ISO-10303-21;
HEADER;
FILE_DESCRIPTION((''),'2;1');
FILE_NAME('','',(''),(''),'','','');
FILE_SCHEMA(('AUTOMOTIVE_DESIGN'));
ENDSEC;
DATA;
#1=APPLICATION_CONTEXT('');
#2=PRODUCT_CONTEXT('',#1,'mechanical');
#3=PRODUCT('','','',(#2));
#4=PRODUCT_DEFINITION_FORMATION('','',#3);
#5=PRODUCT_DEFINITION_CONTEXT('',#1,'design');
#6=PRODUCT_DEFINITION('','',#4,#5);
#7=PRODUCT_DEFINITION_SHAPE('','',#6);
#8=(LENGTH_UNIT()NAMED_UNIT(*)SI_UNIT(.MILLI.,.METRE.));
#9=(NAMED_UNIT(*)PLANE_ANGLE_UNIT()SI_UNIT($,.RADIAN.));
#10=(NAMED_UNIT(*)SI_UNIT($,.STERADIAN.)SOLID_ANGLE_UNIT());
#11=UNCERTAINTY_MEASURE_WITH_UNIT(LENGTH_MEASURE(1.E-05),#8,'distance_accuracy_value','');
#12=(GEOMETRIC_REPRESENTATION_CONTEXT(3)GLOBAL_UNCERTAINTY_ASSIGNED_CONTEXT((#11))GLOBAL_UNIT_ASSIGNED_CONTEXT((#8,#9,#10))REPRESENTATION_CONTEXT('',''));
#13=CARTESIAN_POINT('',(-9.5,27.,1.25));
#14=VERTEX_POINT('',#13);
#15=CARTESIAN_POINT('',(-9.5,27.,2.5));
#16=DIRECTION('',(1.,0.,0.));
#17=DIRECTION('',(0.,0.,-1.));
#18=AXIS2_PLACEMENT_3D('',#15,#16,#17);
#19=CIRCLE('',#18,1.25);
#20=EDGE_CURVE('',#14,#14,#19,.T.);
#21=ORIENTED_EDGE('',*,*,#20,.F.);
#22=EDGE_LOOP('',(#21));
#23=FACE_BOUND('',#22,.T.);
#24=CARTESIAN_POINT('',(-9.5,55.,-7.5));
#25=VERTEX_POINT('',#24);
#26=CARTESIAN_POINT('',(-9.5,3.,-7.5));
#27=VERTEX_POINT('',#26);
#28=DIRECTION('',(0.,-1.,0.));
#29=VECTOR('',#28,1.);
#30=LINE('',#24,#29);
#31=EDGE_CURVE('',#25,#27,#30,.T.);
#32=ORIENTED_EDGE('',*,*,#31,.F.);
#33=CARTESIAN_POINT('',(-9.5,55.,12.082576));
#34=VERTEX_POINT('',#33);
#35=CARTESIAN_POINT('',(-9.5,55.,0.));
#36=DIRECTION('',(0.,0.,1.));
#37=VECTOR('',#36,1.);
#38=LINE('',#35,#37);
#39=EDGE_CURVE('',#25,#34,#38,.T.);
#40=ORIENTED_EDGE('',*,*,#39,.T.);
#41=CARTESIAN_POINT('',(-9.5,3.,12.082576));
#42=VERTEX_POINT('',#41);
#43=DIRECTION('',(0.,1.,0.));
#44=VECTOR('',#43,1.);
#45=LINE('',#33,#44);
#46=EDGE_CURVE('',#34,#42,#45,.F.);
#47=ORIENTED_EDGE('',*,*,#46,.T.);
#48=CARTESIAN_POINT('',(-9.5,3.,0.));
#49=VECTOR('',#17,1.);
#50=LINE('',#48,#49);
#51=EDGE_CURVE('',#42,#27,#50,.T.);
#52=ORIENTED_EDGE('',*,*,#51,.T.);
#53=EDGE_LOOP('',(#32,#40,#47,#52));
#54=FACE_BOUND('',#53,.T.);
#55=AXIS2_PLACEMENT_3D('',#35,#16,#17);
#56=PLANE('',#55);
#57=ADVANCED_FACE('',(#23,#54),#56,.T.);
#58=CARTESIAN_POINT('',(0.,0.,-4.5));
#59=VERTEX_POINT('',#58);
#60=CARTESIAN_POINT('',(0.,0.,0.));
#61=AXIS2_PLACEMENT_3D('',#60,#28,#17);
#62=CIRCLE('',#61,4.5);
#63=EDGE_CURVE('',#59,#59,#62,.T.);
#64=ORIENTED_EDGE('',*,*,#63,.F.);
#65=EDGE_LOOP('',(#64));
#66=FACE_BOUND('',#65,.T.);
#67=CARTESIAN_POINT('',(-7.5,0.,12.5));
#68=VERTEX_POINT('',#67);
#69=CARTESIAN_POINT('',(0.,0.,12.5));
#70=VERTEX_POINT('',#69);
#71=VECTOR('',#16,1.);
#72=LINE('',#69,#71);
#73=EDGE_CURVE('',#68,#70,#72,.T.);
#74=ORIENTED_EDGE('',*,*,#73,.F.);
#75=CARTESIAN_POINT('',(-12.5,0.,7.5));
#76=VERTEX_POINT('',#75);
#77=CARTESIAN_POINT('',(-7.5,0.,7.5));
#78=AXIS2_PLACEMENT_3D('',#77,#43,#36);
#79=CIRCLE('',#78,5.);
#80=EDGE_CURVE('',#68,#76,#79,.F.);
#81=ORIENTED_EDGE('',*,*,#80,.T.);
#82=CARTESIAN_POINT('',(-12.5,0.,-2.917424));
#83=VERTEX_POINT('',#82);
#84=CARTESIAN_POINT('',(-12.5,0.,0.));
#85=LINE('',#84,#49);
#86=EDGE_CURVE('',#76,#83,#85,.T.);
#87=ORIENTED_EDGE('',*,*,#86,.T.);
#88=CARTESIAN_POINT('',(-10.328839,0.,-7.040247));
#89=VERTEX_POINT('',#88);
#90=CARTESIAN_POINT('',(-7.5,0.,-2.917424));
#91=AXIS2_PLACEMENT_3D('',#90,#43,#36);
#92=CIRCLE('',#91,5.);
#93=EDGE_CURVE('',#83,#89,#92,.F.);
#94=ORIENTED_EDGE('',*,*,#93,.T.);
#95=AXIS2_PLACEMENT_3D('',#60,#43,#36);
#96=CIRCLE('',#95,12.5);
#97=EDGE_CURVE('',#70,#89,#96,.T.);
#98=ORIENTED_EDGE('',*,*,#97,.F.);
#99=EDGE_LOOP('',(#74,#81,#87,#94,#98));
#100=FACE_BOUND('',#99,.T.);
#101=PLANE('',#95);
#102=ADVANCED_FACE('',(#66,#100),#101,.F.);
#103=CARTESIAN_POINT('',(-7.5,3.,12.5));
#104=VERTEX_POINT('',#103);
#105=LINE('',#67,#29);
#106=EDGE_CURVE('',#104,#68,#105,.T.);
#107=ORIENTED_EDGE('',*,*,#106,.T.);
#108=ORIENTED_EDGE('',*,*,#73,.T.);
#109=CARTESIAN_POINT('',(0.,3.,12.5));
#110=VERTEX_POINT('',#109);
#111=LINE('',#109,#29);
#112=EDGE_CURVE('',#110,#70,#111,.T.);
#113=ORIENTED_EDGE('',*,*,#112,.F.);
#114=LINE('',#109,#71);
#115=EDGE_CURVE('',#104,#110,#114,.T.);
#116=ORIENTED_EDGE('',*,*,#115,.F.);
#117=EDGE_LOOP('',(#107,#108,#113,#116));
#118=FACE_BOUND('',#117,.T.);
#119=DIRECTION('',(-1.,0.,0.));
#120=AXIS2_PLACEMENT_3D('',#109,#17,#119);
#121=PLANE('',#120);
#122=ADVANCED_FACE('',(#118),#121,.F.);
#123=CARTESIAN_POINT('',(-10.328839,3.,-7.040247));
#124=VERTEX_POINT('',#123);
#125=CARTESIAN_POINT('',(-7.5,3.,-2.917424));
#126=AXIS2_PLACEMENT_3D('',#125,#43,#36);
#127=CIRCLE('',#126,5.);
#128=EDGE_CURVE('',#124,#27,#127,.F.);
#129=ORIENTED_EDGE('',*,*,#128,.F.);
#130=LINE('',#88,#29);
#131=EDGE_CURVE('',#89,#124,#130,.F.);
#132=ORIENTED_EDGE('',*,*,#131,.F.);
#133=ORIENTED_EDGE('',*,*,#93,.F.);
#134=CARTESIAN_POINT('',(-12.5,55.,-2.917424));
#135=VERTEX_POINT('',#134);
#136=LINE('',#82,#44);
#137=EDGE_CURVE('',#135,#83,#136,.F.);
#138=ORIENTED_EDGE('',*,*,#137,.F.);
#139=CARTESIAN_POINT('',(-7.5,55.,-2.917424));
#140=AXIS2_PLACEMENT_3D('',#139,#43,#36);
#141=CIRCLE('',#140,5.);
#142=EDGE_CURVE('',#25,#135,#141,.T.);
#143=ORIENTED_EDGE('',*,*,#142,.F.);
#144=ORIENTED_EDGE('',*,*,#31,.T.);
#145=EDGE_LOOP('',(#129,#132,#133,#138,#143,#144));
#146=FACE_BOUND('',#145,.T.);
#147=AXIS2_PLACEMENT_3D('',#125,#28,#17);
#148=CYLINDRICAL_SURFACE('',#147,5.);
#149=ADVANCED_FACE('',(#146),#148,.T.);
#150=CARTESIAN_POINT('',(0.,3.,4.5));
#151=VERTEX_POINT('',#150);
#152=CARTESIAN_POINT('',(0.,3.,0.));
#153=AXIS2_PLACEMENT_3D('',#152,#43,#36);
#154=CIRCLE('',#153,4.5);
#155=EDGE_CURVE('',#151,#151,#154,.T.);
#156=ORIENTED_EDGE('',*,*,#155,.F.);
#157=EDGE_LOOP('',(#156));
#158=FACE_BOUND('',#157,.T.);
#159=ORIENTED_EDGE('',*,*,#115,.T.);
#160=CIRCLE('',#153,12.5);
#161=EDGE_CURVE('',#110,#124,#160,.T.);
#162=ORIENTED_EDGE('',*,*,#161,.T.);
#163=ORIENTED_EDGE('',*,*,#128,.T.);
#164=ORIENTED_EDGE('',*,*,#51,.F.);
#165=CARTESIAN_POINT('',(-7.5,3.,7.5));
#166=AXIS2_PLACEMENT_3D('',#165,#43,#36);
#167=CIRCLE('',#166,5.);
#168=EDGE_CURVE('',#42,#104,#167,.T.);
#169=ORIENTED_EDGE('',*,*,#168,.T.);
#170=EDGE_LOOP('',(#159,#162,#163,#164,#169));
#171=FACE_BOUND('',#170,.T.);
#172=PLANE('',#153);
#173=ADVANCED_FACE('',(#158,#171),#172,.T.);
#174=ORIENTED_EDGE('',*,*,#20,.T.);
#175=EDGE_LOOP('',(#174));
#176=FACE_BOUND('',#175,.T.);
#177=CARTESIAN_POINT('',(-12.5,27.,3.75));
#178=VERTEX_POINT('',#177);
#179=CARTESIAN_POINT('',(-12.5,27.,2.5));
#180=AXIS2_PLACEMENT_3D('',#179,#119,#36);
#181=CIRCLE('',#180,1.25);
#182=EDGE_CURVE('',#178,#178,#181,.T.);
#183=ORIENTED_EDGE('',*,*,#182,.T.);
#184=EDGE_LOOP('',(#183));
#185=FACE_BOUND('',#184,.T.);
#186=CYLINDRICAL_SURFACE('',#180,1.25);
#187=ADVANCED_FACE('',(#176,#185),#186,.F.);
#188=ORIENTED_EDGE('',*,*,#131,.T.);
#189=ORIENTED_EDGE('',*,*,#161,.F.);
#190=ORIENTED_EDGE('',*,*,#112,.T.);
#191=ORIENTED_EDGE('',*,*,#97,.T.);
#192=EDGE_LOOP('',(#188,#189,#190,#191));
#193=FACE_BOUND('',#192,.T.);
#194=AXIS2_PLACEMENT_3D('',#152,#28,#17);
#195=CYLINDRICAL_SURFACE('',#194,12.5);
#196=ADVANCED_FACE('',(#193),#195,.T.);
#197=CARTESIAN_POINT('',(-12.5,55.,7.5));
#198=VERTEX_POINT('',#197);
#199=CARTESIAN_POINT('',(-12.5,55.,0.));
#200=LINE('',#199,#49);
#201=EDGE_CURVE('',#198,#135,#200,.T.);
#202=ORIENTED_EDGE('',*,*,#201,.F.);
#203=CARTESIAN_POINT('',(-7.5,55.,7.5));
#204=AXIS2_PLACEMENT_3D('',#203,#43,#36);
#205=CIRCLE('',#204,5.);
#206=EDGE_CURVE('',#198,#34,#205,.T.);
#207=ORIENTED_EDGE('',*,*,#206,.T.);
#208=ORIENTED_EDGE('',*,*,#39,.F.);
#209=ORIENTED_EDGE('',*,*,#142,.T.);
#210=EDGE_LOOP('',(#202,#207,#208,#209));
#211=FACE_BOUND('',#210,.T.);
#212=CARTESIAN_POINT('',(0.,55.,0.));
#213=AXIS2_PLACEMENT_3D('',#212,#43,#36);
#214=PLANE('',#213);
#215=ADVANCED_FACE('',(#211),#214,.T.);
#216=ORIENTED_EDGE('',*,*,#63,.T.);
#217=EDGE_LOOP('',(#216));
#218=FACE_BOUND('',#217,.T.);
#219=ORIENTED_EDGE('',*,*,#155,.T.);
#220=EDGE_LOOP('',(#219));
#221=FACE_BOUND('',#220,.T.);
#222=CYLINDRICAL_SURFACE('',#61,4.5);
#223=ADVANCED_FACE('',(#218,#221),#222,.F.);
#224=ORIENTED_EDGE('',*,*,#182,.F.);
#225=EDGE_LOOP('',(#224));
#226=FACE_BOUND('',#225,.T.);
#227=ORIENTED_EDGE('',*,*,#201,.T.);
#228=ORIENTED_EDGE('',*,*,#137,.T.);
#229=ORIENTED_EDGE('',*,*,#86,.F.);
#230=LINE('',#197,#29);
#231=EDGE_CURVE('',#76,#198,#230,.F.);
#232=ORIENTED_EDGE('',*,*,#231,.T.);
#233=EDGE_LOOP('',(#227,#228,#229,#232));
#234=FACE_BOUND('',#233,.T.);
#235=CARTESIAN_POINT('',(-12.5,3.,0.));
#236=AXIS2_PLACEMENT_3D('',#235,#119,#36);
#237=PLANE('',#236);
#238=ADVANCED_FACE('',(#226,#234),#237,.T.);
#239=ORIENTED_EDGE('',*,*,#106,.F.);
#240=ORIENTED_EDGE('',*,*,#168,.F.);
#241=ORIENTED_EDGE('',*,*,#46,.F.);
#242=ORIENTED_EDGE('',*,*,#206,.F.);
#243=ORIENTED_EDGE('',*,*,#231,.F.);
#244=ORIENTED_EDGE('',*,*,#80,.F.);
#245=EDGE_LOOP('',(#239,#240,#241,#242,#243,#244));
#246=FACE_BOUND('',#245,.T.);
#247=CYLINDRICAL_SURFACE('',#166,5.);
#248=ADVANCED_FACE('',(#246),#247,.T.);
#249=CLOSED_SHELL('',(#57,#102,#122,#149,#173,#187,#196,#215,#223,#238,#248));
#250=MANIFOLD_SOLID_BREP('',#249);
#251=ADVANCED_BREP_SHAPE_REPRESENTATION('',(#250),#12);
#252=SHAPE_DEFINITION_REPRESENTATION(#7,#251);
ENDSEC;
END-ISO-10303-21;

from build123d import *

# Parameters (mm, degrees)
BOSS_EXTRUDE1_DEPTH         = 3
SKETCH1_4_W                 = 3
SKETCH1_4_H                 = 20
BOSS_EXTRUDE3_DEPTH         = 55
M8_CLEARANCE_HOLE1_D        = 9
TAP_DRILL_FOR_M3X0_5_TAP1_D = 2.5
FILLET1_R                   = 5


with BuildPart() as part:
    # Sketch1 → Boss-Extrude1 (new body)
    with BuildSketch(Plane(origin=(0, 0, 0), x_dir=(1, 0, 0), z_dir=(0, 1, 0))):
        with BuildLine():
            Line((-12.5, -12.5), (0, -12.5))
            ThreePointArc((0, -12.5), (11.180339887, 5.590169944), (-10, 7.5))
            Line((-10, 7.5), (-12.5, 7.5))
            Line((-12.5, 7.5), (-12.5, -12.5))
        make_face()
    extrude(amount=BOSS_EXTRUDE1_DEPTH)

    # Sketch1<4> → Boss-Extrude3 (add)
    with BuildSketch(Plane(origin=(0, 0, 0), x_dir=(1, 0, 0), z_dir=(0, 1, 0))):
        with Locations((-11, -2.5)):
            Rectangle(SKETCH1_4_W, SKETCH1_4_H)
    extrude(amount=BOSS_EXTRUDE3_DEPTH)

    # M8 Clearance Hole1 (through all)
    with Locations(Plane(origin=(0, 0, 0), x_dir=(-1, 0, 0), z_dir=(0, -1, 0))):
        with Locations((0, 0)):
            Hole(M8_CLEARANCE_HOLE1_D / 2)

    # Tap Drill for M3x0.5 Tap1 (through all)
    with Locations(Plane.ZY.offset(12.5)):
        with Locations((2.5, 27)):
            Hole(TAP_DRILL_FOR_M3X0_5_TAP1_D / 2)

    # Fillet1
    # the kernel refuses this fillet: 5 mm, written as the material it takes off along each edge
    with BuildSketch(Plane(origin=(-12.5, -12.5, 12.5), x_dir=(0, 0, -1), z_dir=(0, 1, 0))) as fillet1_piece_1:
        with BuildLine():
            CenterArc((FILLET1_R, -FILLET1_R), FILLET1_R, 90, 90)
            Line((0, -FILLET1_R), (0, 0))
            Line((0, 0), (FILLET1_R, 0))
        make_face()
    extrude(amount=80, mode=Mode.SUBTRACT)
    with BuildSketch(Plane(origin=(-12.5, -11.456439237, -7.5), x_dir=(1, 0, 0), z_dir=(0, 1, 0))) as fillet1_piece_2_section:
        with BuildLine():
            CenterArc((5, -4.582575695), FILLET1_R, 113.578178478, 66.421821522)
            Line((0, -4.582575695), (0, 0))
            Line((0, 0), (3, 0))
        make_face()
    fillet1_piece_2 = extrude(amount=77.912878475, mode=Mode.PRIVATE)
    fillet1_piece_2 = fillet1_piece_2 - Plane(origin=(0, -11.456439237, 0), x_dir=(0, 0, 1), z_dir=(0, -1, 0)) * Cylinder(12.5, 175, mode=Mode.PRIVATE)
    add(fillet1_piece_2, mode=Mode.SUBTRACT)
    with BuildSketch(Plane(origin=(-12.5, -11.456439237, -7.5), x_dir=(1, 0, 0), z_dir=(0, 1, 0))) as fillet1_piece_3_section:
        with BuildLine():
            CenterArc((5, -4.582575695), FILLET1_R, 113.578178478, 66.421821522)
            Line((0, -4.582575695), (0, 0))
            Line((0, 0), (3, 0))
        make_face()
    fillet1_piece_3 = extrude(amount=77.912878475, mode=Mode.PRIVATE)
    fillet1_piece_3 = split(fillet1_piece_3, bisect_by=Plane(origin=(-12.5, 3, -7.5), z_dir=(0, 1, 0)), keep=Keep.TOP, mode=Mode.PRIVATE)
    add(fillet1_piece_3, mode=Mode.SUBTRACT)


solid = part.part
